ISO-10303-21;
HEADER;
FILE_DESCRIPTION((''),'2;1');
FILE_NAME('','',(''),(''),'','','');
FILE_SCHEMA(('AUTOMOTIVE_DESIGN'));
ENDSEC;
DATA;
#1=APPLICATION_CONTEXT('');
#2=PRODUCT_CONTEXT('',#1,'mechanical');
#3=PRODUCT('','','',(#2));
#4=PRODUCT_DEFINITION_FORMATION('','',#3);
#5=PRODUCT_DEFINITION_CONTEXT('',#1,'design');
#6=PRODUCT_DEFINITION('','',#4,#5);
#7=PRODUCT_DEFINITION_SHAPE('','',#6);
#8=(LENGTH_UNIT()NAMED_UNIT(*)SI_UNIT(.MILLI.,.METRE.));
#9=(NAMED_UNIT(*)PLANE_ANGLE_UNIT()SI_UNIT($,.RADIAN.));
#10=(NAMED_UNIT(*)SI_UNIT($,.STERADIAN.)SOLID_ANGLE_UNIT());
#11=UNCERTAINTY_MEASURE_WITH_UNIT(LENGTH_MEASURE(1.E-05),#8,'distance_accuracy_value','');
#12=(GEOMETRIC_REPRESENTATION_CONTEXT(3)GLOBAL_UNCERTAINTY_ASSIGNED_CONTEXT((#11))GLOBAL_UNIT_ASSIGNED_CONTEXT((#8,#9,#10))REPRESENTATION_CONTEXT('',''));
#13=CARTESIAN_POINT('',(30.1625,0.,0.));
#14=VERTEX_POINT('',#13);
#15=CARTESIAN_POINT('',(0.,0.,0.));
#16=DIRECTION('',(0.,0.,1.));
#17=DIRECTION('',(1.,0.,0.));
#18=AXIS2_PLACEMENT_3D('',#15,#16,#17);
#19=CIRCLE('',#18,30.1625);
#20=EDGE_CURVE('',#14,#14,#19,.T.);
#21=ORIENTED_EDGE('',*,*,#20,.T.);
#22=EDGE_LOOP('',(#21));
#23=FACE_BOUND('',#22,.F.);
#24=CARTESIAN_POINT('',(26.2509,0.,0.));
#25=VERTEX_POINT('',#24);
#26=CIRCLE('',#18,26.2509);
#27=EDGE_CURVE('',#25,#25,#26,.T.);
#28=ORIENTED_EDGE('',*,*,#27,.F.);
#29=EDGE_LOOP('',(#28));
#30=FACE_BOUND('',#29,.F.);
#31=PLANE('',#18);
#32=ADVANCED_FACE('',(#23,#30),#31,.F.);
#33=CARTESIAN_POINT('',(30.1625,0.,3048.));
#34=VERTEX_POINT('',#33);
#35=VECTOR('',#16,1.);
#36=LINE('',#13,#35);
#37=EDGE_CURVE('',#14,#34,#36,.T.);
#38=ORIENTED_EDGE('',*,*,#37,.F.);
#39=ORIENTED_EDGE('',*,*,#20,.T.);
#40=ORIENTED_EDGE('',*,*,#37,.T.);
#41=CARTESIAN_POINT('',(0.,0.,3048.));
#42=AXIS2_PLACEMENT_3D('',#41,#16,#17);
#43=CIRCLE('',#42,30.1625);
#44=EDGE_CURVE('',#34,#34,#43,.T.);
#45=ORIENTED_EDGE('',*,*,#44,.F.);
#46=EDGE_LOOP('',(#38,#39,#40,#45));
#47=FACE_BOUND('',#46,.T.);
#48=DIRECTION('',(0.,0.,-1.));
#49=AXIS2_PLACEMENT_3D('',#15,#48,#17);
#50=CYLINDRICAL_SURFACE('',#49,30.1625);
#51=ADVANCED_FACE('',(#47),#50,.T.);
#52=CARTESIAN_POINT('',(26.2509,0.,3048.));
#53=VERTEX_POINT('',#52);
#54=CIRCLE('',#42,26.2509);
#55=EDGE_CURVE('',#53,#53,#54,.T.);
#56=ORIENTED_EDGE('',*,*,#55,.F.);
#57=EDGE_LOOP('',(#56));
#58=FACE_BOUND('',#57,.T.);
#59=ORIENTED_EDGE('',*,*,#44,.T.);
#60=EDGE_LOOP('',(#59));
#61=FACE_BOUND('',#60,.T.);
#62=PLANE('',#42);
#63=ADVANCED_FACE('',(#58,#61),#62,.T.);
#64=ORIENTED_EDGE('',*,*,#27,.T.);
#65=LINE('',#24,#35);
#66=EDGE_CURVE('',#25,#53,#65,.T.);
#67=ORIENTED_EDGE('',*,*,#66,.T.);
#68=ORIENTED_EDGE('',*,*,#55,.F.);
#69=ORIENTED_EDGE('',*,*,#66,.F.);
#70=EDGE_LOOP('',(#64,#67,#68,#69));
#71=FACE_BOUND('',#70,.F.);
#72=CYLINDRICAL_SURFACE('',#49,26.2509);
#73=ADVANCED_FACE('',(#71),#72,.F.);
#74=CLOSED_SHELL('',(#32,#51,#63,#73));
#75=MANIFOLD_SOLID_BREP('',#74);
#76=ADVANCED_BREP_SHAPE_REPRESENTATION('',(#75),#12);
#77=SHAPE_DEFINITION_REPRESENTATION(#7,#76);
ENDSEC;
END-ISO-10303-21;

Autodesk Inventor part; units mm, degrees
ref_plane "YZ Plane" through (0, 0, 0) normal (1, 0, 0) x (0, 1, 0)
ref_plane "XZ Plane" through (0, 0, 0) normal (0, 1, 0) x (-1, 0, 0)
ref_plane "XY Plane" through (0, 0, 0) normal (0, 0, 1) x (1, 0, 0)
sketch "Sketch1" plane through (0, 0, 0) normal (0, 0, 1) x (1, 0, 0)
  circle A0 centre (0, 0) radius 30.1625
  circle A1 centre (0, 0) radius 26.2509
  dimension "d0" = 60.325
  dimension "d1" = 3.9116
extrude "Extrusion1" add sketch "Sketch1" along normal blind 3048
properties part number "pvcSection" material "PVC-Piping"
